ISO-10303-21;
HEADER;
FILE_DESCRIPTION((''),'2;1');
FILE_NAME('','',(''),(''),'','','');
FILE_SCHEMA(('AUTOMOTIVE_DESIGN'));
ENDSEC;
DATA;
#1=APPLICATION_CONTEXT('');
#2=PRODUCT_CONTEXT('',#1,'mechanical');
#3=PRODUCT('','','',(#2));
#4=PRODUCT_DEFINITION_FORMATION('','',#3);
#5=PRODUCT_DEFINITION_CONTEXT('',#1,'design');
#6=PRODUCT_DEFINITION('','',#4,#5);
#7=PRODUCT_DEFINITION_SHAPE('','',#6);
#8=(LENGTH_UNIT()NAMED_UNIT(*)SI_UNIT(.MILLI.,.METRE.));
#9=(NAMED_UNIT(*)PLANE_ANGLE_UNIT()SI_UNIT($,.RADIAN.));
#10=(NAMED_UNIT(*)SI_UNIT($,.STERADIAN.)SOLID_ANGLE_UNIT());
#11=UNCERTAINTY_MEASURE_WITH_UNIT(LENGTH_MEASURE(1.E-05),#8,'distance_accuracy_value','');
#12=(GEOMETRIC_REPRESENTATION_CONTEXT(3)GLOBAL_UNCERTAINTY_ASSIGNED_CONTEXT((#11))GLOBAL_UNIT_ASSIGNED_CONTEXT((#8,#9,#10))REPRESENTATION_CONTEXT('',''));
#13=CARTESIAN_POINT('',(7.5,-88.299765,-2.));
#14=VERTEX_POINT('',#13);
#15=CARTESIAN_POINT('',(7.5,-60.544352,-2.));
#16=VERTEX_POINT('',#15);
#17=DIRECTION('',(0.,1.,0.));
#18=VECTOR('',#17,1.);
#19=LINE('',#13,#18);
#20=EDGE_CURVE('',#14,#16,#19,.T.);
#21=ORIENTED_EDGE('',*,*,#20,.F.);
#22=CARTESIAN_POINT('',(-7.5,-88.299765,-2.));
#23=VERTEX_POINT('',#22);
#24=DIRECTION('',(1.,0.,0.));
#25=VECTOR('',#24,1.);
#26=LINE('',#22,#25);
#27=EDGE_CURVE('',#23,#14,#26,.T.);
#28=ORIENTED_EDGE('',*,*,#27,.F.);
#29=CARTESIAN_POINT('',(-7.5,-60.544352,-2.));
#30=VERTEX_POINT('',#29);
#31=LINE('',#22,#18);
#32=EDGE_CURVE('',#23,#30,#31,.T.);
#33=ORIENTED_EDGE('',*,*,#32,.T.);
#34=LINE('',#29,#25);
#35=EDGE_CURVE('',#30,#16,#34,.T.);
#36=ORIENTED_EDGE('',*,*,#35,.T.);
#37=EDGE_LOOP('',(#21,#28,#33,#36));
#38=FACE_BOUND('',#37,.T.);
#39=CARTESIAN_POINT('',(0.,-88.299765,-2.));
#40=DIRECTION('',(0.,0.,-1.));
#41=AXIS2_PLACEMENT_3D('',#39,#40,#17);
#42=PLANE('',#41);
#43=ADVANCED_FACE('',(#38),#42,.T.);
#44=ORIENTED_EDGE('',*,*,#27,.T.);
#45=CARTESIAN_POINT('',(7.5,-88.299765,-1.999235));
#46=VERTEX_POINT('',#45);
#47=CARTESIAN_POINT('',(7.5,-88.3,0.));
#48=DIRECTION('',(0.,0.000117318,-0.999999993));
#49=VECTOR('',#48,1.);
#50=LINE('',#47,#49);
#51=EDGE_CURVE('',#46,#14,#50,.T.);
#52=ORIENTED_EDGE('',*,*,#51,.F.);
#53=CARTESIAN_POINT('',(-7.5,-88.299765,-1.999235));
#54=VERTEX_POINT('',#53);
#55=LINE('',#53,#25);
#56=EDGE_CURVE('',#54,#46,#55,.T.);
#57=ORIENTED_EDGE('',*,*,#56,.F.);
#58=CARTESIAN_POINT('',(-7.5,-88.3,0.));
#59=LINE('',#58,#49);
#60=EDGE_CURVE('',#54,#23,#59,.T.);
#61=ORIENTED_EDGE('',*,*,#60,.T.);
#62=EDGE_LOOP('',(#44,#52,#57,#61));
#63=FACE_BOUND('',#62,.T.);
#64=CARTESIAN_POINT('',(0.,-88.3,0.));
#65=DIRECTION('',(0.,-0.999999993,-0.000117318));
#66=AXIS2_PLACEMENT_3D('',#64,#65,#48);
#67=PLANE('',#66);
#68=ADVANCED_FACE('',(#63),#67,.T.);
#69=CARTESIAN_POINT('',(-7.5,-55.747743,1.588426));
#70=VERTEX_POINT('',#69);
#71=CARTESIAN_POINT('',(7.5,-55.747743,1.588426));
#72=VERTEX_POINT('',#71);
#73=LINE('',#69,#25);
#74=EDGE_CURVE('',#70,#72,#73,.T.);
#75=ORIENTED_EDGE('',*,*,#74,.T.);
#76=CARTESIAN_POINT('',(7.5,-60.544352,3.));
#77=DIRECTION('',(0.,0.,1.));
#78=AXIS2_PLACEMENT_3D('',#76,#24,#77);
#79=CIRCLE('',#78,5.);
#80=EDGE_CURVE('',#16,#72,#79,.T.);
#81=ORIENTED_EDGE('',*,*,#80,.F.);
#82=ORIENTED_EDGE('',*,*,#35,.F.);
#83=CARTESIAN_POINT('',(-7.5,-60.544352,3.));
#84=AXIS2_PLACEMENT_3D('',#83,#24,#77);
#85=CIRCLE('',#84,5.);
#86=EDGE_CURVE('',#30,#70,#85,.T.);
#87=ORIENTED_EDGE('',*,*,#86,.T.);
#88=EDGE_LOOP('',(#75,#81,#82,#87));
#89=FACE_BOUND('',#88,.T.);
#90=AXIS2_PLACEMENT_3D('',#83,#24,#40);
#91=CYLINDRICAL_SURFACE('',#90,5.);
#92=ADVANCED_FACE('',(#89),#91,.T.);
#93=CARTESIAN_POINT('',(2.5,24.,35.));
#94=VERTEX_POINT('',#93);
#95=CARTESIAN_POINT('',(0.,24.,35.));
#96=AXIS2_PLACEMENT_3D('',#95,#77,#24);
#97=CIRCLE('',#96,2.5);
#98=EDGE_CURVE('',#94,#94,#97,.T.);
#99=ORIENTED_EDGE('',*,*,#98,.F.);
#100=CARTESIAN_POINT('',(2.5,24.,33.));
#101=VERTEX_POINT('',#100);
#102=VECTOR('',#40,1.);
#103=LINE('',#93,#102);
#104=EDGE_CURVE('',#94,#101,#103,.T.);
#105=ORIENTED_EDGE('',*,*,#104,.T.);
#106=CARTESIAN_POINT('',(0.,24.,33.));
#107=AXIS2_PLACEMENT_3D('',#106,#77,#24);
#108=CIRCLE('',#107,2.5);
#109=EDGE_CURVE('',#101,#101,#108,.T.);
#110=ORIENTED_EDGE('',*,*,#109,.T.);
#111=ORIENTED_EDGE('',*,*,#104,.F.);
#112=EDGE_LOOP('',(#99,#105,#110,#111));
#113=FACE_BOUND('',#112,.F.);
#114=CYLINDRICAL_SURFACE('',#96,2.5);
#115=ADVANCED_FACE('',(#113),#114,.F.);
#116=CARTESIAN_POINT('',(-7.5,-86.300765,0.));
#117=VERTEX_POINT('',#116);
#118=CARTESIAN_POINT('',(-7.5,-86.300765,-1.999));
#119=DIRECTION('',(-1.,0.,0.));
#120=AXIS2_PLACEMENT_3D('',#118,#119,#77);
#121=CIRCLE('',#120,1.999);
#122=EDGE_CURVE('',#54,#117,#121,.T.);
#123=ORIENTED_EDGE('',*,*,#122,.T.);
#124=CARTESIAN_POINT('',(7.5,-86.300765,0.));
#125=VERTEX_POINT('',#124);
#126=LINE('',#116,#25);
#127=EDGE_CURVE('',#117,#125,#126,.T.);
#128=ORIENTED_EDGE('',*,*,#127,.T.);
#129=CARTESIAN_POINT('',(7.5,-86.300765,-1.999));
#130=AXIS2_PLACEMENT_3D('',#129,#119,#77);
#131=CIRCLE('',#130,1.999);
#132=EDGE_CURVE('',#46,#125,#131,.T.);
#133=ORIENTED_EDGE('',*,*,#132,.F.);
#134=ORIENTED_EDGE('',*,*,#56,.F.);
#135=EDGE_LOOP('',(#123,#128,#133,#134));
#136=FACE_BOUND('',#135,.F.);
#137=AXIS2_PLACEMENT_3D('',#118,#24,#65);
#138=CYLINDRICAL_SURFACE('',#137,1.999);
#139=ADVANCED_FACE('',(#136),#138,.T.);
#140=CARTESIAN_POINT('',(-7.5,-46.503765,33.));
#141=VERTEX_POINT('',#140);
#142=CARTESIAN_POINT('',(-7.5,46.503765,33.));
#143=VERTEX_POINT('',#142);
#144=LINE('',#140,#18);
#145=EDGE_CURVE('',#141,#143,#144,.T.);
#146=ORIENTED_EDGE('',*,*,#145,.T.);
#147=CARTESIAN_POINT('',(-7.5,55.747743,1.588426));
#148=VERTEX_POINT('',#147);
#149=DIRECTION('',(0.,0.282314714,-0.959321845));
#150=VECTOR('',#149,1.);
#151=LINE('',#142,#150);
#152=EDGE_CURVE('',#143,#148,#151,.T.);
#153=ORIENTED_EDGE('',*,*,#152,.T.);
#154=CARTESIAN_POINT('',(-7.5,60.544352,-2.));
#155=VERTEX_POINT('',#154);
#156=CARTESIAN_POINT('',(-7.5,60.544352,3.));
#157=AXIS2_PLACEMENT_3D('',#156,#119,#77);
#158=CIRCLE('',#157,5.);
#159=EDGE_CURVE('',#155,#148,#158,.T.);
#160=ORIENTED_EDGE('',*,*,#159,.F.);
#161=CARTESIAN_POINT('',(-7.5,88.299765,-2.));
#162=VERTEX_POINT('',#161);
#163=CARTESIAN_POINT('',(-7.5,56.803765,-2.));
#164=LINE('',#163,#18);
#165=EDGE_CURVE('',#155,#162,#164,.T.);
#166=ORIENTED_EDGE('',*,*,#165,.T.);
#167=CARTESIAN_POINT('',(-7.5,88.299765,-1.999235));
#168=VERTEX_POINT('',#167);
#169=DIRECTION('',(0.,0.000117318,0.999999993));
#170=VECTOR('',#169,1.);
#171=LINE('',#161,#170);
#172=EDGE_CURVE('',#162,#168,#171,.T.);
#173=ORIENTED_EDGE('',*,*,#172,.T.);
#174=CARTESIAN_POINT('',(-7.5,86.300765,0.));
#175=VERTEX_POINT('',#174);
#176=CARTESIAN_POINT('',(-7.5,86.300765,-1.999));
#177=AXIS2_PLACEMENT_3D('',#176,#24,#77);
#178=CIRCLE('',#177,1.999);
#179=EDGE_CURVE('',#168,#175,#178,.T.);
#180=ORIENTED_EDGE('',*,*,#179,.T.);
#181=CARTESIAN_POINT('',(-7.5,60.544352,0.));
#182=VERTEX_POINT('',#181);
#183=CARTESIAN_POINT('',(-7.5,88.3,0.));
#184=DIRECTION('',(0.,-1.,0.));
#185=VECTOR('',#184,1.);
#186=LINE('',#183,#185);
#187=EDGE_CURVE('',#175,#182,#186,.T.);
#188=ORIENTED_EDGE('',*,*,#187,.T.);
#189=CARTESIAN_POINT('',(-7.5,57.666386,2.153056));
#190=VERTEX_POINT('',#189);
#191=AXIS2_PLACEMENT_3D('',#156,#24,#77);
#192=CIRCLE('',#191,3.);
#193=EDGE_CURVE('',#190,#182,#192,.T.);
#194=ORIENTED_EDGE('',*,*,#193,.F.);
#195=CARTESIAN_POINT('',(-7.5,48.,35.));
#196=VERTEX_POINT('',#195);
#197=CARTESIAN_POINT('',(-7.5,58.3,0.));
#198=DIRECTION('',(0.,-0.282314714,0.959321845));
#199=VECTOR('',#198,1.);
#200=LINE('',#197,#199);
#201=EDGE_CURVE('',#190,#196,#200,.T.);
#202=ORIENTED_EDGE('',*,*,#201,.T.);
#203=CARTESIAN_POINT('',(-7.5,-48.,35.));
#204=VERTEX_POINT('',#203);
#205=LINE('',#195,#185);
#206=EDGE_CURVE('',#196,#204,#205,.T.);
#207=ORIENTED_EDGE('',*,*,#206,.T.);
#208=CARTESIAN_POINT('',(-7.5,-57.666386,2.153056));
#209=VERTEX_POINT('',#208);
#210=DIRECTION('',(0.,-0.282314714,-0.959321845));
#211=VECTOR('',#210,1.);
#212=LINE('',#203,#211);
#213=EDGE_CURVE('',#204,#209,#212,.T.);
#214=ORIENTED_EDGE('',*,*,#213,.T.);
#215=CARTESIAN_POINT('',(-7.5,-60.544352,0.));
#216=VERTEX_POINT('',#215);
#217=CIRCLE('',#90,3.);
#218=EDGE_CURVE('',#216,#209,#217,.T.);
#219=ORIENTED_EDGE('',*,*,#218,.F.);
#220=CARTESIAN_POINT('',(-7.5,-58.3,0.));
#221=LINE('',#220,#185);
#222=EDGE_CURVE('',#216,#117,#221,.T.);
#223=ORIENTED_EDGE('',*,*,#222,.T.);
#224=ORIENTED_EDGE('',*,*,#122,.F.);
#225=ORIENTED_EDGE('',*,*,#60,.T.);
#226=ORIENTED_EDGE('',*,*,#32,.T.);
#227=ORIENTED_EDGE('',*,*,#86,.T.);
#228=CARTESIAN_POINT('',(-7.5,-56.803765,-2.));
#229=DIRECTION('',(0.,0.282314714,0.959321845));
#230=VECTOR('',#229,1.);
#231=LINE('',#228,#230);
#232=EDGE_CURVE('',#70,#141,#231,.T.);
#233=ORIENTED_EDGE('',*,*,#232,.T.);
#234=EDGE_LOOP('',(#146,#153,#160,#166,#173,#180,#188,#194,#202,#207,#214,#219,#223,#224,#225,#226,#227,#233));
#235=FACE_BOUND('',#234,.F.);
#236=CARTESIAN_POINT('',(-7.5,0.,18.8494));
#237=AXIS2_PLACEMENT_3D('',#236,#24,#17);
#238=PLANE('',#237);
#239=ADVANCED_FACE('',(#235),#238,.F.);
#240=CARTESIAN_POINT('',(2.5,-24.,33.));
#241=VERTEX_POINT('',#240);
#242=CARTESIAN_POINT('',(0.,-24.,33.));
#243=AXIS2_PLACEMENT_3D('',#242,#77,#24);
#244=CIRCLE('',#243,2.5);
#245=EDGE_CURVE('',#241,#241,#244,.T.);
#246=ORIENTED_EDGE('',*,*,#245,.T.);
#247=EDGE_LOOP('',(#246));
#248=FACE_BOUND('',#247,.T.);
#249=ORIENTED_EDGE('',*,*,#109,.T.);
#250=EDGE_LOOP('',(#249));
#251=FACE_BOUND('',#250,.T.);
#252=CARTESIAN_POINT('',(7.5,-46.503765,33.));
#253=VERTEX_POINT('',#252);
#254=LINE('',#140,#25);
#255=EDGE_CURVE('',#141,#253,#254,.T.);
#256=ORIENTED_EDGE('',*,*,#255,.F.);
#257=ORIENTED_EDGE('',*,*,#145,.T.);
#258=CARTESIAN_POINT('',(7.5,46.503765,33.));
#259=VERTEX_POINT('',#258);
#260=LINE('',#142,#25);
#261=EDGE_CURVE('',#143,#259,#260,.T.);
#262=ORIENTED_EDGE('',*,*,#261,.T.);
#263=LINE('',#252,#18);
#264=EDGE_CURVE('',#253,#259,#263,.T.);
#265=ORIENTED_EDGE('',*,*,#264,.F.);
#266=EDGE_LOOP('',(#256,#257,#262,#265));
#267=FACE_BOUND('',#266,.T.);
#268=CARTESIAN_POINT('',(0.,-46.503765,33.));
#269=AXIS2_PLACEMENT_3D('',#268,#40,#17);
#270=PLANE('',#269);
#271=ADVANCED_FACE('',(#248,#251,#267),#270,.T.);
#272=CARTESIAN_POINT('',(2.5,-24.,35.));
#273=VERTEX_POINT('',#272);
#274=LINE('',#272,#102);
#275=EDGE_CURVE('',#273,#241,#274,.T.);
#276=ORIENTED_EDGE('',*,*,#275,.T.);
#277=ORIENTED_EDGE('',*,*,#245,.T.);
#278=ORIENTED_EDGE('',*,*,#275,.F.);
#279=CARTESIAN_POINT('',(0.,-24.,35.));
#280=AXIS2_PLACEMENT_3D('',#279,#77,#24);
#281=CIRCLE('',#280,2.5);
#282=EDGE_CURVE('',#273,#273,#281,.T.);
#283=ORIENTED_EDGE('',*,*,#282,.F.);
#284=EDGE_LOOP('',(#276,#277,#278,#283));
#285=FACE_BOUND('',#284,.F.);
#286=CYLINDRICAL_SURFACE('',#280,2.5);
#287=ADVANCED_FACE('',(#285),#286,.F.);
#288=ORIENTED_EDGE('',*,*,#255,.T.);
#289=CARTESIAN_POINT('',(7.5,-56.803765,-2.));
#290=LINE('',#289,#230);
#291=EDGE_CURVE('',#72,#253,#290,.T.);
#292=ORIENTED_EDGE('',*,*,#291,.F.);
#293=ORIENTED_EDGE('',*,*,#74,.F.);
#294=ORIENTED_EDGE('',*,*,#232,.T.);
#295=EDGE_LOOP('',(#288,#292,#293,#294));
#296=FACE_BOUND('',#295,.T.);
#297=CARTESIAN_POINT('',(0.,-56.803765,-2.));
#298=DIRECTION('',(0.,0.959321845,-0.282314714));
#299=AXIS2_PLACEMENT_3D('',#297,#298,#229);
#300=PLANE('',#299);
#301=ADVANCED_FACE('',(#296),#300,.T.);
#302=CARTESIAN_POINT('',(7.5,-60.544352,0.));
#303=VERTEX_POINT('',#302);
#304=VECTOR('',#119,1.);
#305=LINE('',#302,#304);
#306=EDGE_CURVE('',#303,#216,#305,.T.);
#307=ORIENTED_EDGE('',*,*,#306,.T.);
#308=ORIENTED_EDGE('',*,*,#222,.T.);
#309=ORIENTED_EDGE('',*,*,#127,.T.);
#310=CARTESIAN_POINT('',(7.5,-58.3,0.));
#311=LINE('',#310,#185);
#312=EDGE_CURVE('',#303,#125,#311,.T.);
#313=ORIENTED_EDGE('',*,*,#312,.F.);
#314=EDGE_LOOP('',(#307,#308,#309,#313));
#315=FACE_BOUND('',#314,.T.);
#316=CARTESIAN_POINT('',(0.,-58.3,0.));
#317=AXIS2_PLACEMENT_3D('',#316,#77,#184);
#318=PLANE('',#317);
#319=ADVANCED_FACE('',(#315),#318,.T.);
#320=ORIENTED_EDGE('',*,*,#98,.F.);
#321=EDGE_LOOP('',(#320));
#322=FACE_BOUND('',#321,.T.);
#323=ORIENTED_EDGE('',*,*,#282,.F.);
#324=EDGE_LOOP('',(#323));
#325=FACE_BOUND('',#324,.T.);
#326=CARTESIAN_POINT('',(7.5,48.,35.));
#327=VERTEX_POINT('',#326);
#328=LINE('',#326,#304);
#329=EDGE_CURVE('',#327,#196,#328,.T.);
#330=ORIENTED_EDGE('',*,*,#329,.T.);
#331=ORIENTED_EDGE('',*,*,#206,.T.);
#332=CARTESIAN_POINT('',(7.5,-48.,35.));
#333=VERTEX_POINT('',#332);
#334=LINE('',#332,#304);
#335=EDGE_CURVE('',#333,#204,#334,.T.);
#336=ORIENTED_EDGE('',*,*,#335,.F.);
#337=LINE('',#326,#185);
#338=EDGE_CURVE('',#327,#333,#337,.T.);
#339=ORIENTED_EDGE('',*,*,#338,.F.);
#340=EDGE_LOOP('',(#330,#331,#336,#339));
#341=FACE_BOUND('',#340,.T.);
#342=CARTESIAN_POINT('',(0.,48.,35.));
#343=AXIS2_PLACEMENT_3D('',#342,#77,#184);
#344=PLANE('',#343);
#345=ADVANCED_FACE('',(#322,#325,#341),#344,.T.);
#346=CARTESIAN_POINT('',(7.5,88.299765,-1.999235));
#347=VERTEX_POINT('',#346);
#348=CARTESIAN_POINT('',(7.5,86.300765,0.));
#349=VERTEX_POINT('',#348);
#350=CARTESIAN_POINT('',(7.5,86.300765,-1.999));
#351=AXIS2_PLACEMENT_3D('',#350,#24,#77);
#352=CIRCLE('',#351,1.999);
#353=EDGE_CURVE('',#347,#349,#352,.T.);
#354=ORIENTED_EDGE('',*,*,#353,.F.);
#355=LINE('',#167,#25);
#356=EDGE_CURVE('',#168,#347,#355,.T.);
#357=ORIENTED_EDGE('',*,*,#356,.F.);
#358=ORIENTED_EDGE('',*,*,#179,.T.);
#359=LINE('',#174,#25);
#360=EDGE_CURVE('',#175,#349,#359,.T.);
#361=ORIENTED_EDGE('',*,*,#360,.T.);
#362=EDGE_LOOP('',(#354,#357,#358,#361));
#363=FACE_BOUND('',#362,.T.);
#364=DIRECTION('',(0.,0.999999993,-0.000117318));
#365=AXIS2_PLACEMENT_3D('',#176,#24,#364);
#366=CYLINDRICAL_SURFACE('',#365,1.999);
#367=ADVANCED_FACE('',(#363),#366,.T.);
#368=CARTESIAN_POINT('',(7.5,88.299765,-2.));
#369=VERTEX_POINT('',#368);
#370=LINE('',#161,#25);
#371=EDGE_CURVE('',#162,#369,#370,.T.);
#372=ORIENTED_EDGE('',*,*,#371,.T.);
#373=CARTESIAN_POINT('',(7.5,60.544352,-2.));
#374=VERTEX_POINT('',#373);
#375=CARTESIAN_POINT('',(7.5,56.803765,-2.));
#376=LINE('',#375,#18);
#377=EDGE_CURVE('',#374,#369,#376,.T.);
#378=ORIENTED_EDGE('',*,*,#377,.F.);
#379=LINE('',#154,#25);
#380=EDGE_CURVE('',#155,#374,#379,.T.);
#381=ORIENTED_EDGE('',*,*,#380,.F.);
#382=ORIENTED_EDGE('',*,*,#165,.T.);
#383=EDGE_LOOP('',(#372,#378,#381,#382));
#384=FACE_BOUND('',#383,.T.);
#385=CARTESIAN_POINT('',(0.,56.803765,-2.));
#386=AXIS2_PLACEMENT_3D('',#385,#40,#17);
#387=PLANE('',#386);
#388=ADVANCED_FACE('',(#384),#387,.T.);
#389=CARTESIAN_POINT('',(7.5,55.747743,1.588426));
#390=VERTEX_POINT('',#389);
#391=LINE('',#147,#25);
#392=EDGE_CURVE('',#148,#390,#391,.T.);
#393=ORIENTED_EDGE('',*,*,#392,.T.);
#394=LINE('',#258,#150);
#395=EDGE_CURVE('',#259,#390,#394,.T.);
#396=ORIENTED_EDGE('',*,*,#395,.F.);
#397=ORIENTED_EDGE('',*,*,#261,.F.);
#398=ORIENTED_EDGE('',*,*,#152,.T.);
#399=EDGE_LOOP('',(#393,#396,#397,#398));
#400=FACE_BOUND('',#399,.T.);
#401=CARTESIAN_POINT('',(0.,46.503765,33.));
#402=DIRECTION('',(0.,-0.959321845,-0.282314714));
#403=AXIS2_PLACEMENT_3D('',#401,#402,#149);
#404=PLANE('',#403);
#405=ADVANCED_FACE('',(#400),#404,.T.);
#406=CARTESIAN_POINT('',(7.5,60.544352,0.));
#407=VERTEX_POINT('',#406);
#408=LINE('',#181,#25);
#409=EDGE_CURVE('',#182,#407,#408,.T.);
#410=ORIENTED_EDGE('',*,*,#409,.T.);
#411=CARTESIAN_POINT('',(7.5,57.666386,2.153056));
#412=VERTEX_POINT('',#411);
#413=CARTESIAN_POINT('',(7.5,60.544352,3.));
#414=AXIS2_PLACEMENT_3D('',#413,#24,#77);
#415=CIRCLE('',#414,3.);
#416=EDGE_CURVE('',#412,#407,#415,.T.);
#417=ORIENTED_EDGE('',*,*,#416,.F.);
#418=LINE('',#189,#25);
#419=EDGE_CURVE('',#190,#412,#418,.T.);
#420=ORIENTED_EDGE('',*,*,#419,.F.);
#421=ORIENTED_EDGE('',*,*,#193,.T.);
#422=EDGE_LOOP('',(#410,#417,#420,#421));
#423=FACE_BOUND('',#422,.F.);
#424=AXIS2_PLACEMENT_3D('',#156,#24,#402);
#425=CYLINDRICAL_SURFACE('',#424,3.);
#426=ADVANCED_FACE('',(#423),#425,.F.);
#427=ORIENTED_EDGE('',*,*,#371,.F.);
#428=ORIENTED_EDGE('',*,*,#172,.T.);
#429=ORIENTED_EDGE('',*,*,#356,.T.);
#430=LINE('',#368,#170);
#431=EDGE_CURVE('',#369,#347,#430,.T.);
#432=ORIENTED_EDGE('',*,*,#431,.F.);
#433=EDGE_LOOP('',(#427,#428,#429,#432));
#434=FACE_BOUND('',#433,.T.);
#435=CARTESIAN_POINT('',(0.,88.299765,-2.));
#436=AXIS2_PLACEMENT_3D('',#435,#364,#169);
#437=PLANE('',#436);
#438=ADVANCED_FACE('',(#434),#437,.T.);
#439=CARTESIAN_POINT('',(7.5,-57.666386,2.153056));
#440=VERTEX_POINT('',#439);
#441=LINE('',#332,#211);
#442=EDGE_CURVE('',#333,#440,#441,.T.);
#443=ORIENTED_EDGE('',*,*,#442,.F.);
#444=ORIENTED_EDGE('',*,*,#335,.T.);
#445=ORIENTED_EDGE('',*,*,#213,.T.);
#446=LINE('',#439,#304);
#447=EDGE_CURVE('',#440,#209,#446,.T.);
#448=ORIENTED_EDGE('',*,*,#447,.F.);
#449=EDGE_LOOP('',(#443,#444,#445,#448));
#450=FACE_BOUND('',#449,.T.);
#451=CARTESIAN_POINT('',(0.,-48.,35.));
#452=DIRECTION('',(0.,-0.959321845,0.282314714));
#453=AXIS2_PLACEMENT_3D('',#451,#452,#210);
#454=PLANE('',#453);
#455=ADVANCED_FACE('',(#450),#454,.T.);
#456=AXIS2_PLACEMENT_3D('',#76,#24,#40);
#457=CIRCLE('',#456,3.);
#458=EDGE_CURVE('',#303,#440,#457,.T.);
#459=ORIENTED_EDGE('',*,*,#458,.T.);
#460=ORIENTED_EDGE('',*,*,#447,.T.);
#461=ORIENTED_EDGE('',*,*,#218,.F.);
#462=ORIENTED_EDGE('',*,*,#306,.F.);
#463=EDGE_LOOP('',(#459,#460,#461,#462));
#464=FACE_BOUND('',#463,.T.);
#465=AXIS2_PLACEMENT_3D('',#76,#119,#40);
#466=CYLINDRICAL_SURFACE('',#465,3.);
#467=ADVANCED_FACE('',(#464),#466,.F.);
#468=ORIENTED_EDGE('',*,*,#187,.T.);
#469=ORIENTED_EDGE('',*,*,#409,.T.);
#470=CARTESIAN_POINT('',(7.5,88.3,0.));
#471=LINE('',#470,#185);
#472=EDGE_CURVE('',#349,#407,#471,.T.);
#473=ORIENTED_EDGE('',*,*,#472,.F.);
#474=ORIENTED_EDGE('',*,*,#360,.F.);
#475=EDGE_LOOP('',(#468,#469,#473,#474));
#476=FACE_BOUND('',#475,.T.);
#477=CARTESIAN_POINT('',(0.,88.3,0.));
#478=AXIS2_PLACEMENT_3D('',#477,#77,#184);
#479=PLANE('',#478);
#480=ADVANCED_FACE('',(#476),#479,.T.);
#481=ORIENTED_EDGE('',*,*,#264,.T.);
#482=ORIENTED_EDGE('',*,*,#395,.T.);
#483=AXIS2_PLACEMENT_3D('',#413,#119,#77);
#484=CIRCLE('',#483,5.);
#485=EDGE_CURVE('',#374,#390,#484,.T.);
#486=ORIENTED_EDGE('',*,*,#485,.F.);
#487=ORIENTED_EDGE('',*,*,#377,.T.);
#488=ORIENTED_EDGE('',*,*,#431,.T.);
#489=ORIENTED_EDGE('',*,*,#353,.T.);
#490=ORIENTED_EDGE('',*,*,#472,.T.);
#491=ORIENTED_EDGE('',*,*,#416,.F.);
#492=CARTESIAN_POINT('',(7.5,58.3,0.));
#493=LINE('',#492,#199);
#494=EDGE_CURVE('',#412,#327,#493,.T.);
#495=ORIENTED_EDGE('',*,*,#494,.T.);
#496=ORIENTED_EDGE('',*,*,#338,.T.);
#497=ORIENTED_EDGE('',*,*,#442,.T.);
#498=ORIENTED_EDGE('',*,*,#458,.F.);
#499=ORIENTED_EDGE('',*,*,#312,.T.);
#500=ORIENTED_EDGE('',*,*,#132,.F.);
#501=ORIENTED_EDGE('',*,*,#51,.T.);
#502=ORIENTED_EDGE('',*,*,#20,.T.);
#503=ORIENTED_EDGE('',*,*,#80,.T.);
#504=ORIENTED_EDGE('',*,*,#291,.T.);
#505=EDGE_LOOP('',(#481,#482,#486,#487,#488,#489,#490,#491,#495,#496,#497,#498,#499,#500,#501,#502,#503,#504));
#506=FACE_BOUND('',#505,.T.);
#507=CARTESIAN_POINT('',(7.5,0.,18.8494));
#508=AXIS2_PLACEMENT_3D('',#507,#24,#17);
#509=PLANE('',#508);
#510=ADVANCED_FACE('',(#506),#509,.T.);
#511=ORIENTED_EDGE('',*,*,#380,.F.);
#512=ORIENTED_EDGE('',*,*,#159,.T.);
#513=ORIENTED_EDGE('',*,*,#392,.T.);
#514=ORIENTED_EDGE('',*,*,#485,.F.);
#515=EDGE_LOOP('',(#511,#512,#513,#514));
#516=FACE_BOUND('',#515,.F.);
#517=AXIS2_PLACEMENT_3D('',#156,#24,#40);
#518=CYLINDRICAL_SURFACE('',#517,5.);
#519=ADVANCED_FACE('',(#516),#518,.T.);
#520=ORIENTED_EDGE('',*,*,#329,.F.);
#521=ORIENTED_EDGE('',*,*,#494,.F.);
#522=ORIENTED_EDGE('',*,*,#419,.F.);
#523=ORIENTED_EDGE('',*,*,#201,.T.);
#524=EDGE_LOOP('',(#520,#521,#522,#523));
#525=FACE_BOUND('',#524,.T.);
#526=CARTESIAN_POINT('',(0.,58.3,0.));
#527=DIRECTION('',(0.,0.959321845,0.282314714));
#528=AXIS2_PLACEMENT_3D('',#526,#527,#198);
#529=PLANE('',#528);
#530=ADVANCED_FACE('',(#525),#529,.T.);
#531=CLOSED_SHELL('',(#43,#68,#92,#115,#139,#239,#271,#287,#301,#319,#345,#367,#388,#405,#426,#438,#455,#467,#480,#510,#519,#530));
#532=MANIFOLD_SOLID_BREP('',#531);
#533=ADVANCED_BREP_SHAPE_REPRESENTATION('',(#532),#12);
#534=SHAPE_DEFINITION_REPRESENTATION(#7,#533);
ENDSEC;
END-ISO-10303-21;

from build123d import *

# Parameters (mm, degrees)
F1_DEPTH = 7.5
F2_R     = 2.5
F3_DEPTH = 2
F4_R     = 5
F5_R     = 3
F6_R     = 3
F7_R     = 5
F8_R     = 1.999


# Not quite as in the source:
# - a fillet or chamfer is up to 0.001 mm smaller than in the source, because OpenCascade refuses the exact size


with BuildPart() as f1:
    # F0 (on Right) → F1 (new body, symmetric)
    with BuildSketch(Plane.YZ):
        Polygon((-58.3, 0), (-88.3, 0), (-88.2997653641, -2), (-56.8037653641, -2), (-46.5037653641, 33), (0, 33), (46.5037653641, 33), (56.8037653641, -2), (88.2997653641, -2), (88.3, 0), (58.3, 0), (48, 35), (0, 35), (-48, 35), align=None)
    extrude(amount=F1_DEPTH, both=True)

    # F2 (on face) → F3 (cut)
    with BuildSketch(Plane.XY.offset(35)):
        with Locations((0, -24)):
            Circle(F2_R)
        with Locations((0, 24)):
            Circle(F2_R)
    extrude(amount=-F3_DEPTH, mode=Mode.SUBTRACT)

    # F4
    f4_edges = [f1.edges().sort_by_distance(p)[0] for p in [
        (0, -56.803765, -2),
    ]]
    fillet(f4_edges, radius=F4_R)

    # F5
    f5_edges = [f1.edges().sort_by_distance(p)[0] for p in [
        (0, -58.3, 0),
    ]]
    fillet(f5_edges, radius=F5_R)

    # F6
    f6_edges = [f1.edges().sort_by_distance(p)[0] for p in [
        (0, 58.3, 0),
    ]]
    fillet(f6_edges, radius=F6_R)

    # F7
    f7_edges = [f1.edges().sort_by_distance(p)[0] for p in [
        (0, 56.803765, -2),
    ]]
    fillet(f7_edges, radius=F7_R)

    # F8 (radius 2 in the source; OpenCascade refuses exactly that, so slightly less here)
    f8_edges = [f1.edges().sort_by_distance(p)[0] for p in [
        (0, -88.3, 0),
        (0, 88.3, 0),
    ]]
    fillet(f8_edges, radius=F8_R)


solid = f1.part
